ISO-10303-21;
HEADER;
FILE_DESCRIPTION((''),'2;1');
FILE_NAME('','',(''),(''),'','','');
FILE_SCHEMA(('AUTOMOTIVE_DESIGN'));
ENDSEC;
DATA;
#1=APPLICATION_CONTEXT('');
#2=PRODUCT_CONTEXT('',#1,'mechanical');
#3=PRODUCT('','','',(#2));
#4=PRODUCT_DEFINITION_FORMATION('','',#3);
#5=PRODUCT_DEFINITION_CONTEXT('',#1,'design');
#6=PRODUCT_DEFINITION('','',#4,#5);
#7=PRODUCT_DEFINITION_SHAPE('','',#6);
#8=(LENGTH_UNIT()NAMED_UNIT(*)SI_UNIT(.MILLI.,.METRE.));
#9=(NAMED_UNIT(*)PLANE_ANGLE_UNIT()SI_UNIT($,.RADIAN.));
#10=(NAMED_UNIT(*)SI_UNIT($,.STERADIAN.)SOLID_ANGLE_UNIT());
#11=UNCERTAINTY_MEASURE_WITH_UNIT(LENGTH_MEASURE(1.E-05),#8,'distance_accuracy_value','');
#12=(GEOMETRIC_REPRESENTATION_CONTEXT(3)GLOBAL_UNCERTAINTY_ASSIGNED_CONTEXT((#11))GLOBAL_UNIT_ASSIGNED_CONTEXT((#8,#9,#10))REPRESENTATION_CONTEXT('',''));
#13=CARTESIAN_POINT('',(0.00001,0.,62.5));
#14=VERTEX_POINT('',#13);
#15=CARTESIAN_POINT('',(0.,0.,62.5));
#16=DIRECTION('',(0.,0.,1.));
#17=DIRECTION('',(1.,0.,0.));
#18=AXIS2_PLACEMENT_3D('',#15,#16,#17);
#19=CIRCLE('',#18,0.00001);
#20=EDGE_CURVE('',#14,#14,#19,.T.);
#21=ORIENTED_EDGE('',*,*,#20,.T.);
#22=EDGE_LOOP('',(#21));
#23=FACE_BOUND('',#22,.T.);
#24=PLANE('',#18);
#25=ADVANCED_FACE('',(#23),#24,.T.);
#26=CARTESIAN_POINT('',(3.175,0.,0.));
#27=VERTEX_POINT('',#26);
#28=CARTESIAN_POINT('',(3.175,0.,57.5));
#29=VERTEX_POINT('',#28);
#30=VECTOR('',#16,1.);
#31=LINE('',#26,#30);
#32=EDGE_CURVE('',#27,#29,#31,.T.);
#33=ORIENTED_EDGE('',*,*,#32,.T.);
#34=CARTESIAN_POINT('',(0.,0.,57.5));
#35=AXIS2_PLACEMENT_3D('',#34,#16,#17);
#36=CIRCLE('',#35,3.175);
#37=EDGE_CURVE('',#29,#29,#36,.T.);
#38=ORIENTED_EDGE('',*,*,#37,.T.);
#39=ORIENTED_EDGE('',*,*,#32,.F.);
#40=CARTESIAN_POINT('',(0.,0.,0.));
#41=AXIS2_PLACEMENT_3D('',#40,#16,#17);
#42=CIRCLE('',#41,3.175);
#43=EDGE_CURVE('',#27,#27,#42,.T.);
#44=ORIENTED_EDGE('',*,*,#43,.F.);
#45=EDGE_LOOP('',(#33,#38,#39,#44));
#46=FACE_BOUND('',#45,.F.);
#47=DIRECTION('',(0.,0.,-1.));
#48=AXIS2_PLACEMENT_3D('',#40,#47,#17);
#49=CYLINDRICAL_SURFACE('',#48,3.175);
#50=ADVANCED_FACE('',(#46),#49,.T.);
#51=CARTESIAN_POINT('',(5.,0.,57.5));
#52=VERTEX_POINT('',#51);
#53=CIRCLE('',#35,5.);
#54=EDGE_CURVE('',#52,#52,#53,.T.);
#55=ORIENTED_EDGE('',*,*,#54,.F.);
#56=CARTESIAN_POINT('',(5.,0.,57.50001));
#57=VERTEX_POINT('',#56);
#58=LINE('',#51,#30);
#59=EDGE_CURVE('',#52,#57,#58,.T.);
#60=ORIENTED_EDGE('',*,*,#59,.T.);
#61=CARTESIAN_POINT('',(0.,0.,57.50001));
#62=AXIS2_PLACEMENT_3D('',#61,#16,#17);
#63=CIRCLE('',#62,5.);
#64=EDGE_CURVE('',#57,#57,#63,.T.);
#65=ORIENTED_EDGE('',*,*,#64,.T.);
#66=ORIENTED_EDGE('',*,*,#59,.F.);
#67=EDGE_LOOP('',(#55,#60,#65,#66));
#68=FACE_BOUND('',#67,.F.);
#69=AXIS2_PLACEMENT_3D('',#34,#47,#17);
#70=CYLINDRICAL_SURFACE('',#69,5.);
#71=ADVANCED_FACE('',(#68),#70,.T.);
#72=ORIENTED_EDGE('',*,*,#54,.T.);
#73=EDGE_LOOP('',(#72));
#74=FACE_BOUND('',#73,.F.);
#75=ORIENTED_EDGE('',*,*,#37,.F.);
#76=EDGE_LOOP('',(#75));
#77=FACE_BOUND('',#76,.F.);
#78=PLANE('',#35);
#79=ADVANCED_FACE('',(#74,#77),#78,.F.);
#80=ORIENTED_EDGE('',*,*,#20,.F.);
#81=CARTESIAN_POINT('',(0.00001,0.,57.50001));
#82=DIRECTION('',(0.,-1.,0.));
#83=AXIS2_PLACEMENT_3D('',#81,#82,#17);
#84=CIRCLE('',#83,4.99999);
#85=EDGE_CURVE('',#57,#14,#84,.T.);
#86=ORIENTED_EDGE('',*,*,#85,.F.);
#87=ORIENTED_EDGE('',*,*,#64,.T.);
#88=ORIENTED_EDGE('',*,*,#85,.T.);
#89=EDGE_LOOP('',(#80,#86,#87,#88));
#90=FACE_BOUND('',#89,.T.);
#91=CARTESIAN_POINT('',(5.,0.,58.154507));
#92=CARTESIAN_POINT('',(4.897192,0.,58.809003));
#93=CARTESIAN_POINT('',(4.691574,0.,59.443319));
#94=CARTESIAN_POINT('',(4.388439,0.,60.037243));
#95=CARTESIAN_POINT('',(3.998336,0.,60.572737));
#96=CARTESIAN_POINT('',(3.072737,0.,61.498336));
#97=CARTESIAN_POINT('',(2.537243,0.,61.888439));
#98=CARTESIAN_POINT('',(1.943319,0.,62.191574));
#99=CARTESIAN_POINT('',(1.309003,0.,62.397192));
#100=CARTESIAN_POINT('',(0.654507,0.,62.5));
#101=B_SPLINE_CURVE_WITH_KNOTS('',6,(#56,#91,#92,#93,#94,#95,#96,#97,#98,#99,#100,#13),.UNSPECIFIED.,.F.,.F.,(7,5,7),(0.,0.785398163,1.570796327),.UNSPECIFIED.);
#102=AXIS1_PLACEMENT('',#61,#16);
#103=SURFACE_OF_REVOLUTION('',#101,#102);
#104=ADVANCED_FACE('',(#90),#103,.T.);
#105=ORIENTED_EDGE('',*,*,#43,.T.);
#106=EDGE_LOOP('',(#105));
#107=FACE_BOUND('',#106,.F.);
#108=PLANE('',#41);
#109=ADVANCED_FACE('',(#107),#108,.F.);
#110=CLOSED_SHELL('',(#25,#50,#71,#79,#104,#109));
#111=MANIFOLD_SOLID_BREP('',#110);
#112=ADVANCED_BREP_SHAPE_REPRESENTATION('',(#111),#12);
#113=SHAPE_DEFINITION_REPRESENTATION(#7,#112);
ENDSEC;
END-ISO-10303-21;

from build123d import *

# Parameters (mm, degrees)
F0_R     = 3.175
F1_DEPTH = 57.5
F2_R     = 5
F2_R_2   = 3.175
F3_DEPTH = 5
F4_R     = 4.99999


# Not quite as in the source:
# - a fillet or chamfer is up to 0.001 mm smaller than in the source, because OpenCascade refuses the exact size


with BuildPart() as f1:
    # F0 (on Top) → F1 (new body)
    with BuildSketch(Plane.XY):
        Circle(F0_R)
    extrude(amount=F1_DEPTH)

    # F2 (on face) → F3 (join)
    with BuildSketch(Plane.XY.offset(57.5)):
        Circle(F2_R)
        Circle(F2_R_2, mode=Mode.SUBTRACT)
        Circle(F2_R_2)
    extrude(amount=F3_DEPTH)

    # F4 (radius 5 in the source; OpenCascade refuses exactly that, so slightly less here)
    f4_edges = [f1.edges().sort_by_distance(p)[0] for p in [
        (-5, 0, 62.5),
    ]]
    fillet(f4_edges, radius=F4_R)


solid = f1.part
